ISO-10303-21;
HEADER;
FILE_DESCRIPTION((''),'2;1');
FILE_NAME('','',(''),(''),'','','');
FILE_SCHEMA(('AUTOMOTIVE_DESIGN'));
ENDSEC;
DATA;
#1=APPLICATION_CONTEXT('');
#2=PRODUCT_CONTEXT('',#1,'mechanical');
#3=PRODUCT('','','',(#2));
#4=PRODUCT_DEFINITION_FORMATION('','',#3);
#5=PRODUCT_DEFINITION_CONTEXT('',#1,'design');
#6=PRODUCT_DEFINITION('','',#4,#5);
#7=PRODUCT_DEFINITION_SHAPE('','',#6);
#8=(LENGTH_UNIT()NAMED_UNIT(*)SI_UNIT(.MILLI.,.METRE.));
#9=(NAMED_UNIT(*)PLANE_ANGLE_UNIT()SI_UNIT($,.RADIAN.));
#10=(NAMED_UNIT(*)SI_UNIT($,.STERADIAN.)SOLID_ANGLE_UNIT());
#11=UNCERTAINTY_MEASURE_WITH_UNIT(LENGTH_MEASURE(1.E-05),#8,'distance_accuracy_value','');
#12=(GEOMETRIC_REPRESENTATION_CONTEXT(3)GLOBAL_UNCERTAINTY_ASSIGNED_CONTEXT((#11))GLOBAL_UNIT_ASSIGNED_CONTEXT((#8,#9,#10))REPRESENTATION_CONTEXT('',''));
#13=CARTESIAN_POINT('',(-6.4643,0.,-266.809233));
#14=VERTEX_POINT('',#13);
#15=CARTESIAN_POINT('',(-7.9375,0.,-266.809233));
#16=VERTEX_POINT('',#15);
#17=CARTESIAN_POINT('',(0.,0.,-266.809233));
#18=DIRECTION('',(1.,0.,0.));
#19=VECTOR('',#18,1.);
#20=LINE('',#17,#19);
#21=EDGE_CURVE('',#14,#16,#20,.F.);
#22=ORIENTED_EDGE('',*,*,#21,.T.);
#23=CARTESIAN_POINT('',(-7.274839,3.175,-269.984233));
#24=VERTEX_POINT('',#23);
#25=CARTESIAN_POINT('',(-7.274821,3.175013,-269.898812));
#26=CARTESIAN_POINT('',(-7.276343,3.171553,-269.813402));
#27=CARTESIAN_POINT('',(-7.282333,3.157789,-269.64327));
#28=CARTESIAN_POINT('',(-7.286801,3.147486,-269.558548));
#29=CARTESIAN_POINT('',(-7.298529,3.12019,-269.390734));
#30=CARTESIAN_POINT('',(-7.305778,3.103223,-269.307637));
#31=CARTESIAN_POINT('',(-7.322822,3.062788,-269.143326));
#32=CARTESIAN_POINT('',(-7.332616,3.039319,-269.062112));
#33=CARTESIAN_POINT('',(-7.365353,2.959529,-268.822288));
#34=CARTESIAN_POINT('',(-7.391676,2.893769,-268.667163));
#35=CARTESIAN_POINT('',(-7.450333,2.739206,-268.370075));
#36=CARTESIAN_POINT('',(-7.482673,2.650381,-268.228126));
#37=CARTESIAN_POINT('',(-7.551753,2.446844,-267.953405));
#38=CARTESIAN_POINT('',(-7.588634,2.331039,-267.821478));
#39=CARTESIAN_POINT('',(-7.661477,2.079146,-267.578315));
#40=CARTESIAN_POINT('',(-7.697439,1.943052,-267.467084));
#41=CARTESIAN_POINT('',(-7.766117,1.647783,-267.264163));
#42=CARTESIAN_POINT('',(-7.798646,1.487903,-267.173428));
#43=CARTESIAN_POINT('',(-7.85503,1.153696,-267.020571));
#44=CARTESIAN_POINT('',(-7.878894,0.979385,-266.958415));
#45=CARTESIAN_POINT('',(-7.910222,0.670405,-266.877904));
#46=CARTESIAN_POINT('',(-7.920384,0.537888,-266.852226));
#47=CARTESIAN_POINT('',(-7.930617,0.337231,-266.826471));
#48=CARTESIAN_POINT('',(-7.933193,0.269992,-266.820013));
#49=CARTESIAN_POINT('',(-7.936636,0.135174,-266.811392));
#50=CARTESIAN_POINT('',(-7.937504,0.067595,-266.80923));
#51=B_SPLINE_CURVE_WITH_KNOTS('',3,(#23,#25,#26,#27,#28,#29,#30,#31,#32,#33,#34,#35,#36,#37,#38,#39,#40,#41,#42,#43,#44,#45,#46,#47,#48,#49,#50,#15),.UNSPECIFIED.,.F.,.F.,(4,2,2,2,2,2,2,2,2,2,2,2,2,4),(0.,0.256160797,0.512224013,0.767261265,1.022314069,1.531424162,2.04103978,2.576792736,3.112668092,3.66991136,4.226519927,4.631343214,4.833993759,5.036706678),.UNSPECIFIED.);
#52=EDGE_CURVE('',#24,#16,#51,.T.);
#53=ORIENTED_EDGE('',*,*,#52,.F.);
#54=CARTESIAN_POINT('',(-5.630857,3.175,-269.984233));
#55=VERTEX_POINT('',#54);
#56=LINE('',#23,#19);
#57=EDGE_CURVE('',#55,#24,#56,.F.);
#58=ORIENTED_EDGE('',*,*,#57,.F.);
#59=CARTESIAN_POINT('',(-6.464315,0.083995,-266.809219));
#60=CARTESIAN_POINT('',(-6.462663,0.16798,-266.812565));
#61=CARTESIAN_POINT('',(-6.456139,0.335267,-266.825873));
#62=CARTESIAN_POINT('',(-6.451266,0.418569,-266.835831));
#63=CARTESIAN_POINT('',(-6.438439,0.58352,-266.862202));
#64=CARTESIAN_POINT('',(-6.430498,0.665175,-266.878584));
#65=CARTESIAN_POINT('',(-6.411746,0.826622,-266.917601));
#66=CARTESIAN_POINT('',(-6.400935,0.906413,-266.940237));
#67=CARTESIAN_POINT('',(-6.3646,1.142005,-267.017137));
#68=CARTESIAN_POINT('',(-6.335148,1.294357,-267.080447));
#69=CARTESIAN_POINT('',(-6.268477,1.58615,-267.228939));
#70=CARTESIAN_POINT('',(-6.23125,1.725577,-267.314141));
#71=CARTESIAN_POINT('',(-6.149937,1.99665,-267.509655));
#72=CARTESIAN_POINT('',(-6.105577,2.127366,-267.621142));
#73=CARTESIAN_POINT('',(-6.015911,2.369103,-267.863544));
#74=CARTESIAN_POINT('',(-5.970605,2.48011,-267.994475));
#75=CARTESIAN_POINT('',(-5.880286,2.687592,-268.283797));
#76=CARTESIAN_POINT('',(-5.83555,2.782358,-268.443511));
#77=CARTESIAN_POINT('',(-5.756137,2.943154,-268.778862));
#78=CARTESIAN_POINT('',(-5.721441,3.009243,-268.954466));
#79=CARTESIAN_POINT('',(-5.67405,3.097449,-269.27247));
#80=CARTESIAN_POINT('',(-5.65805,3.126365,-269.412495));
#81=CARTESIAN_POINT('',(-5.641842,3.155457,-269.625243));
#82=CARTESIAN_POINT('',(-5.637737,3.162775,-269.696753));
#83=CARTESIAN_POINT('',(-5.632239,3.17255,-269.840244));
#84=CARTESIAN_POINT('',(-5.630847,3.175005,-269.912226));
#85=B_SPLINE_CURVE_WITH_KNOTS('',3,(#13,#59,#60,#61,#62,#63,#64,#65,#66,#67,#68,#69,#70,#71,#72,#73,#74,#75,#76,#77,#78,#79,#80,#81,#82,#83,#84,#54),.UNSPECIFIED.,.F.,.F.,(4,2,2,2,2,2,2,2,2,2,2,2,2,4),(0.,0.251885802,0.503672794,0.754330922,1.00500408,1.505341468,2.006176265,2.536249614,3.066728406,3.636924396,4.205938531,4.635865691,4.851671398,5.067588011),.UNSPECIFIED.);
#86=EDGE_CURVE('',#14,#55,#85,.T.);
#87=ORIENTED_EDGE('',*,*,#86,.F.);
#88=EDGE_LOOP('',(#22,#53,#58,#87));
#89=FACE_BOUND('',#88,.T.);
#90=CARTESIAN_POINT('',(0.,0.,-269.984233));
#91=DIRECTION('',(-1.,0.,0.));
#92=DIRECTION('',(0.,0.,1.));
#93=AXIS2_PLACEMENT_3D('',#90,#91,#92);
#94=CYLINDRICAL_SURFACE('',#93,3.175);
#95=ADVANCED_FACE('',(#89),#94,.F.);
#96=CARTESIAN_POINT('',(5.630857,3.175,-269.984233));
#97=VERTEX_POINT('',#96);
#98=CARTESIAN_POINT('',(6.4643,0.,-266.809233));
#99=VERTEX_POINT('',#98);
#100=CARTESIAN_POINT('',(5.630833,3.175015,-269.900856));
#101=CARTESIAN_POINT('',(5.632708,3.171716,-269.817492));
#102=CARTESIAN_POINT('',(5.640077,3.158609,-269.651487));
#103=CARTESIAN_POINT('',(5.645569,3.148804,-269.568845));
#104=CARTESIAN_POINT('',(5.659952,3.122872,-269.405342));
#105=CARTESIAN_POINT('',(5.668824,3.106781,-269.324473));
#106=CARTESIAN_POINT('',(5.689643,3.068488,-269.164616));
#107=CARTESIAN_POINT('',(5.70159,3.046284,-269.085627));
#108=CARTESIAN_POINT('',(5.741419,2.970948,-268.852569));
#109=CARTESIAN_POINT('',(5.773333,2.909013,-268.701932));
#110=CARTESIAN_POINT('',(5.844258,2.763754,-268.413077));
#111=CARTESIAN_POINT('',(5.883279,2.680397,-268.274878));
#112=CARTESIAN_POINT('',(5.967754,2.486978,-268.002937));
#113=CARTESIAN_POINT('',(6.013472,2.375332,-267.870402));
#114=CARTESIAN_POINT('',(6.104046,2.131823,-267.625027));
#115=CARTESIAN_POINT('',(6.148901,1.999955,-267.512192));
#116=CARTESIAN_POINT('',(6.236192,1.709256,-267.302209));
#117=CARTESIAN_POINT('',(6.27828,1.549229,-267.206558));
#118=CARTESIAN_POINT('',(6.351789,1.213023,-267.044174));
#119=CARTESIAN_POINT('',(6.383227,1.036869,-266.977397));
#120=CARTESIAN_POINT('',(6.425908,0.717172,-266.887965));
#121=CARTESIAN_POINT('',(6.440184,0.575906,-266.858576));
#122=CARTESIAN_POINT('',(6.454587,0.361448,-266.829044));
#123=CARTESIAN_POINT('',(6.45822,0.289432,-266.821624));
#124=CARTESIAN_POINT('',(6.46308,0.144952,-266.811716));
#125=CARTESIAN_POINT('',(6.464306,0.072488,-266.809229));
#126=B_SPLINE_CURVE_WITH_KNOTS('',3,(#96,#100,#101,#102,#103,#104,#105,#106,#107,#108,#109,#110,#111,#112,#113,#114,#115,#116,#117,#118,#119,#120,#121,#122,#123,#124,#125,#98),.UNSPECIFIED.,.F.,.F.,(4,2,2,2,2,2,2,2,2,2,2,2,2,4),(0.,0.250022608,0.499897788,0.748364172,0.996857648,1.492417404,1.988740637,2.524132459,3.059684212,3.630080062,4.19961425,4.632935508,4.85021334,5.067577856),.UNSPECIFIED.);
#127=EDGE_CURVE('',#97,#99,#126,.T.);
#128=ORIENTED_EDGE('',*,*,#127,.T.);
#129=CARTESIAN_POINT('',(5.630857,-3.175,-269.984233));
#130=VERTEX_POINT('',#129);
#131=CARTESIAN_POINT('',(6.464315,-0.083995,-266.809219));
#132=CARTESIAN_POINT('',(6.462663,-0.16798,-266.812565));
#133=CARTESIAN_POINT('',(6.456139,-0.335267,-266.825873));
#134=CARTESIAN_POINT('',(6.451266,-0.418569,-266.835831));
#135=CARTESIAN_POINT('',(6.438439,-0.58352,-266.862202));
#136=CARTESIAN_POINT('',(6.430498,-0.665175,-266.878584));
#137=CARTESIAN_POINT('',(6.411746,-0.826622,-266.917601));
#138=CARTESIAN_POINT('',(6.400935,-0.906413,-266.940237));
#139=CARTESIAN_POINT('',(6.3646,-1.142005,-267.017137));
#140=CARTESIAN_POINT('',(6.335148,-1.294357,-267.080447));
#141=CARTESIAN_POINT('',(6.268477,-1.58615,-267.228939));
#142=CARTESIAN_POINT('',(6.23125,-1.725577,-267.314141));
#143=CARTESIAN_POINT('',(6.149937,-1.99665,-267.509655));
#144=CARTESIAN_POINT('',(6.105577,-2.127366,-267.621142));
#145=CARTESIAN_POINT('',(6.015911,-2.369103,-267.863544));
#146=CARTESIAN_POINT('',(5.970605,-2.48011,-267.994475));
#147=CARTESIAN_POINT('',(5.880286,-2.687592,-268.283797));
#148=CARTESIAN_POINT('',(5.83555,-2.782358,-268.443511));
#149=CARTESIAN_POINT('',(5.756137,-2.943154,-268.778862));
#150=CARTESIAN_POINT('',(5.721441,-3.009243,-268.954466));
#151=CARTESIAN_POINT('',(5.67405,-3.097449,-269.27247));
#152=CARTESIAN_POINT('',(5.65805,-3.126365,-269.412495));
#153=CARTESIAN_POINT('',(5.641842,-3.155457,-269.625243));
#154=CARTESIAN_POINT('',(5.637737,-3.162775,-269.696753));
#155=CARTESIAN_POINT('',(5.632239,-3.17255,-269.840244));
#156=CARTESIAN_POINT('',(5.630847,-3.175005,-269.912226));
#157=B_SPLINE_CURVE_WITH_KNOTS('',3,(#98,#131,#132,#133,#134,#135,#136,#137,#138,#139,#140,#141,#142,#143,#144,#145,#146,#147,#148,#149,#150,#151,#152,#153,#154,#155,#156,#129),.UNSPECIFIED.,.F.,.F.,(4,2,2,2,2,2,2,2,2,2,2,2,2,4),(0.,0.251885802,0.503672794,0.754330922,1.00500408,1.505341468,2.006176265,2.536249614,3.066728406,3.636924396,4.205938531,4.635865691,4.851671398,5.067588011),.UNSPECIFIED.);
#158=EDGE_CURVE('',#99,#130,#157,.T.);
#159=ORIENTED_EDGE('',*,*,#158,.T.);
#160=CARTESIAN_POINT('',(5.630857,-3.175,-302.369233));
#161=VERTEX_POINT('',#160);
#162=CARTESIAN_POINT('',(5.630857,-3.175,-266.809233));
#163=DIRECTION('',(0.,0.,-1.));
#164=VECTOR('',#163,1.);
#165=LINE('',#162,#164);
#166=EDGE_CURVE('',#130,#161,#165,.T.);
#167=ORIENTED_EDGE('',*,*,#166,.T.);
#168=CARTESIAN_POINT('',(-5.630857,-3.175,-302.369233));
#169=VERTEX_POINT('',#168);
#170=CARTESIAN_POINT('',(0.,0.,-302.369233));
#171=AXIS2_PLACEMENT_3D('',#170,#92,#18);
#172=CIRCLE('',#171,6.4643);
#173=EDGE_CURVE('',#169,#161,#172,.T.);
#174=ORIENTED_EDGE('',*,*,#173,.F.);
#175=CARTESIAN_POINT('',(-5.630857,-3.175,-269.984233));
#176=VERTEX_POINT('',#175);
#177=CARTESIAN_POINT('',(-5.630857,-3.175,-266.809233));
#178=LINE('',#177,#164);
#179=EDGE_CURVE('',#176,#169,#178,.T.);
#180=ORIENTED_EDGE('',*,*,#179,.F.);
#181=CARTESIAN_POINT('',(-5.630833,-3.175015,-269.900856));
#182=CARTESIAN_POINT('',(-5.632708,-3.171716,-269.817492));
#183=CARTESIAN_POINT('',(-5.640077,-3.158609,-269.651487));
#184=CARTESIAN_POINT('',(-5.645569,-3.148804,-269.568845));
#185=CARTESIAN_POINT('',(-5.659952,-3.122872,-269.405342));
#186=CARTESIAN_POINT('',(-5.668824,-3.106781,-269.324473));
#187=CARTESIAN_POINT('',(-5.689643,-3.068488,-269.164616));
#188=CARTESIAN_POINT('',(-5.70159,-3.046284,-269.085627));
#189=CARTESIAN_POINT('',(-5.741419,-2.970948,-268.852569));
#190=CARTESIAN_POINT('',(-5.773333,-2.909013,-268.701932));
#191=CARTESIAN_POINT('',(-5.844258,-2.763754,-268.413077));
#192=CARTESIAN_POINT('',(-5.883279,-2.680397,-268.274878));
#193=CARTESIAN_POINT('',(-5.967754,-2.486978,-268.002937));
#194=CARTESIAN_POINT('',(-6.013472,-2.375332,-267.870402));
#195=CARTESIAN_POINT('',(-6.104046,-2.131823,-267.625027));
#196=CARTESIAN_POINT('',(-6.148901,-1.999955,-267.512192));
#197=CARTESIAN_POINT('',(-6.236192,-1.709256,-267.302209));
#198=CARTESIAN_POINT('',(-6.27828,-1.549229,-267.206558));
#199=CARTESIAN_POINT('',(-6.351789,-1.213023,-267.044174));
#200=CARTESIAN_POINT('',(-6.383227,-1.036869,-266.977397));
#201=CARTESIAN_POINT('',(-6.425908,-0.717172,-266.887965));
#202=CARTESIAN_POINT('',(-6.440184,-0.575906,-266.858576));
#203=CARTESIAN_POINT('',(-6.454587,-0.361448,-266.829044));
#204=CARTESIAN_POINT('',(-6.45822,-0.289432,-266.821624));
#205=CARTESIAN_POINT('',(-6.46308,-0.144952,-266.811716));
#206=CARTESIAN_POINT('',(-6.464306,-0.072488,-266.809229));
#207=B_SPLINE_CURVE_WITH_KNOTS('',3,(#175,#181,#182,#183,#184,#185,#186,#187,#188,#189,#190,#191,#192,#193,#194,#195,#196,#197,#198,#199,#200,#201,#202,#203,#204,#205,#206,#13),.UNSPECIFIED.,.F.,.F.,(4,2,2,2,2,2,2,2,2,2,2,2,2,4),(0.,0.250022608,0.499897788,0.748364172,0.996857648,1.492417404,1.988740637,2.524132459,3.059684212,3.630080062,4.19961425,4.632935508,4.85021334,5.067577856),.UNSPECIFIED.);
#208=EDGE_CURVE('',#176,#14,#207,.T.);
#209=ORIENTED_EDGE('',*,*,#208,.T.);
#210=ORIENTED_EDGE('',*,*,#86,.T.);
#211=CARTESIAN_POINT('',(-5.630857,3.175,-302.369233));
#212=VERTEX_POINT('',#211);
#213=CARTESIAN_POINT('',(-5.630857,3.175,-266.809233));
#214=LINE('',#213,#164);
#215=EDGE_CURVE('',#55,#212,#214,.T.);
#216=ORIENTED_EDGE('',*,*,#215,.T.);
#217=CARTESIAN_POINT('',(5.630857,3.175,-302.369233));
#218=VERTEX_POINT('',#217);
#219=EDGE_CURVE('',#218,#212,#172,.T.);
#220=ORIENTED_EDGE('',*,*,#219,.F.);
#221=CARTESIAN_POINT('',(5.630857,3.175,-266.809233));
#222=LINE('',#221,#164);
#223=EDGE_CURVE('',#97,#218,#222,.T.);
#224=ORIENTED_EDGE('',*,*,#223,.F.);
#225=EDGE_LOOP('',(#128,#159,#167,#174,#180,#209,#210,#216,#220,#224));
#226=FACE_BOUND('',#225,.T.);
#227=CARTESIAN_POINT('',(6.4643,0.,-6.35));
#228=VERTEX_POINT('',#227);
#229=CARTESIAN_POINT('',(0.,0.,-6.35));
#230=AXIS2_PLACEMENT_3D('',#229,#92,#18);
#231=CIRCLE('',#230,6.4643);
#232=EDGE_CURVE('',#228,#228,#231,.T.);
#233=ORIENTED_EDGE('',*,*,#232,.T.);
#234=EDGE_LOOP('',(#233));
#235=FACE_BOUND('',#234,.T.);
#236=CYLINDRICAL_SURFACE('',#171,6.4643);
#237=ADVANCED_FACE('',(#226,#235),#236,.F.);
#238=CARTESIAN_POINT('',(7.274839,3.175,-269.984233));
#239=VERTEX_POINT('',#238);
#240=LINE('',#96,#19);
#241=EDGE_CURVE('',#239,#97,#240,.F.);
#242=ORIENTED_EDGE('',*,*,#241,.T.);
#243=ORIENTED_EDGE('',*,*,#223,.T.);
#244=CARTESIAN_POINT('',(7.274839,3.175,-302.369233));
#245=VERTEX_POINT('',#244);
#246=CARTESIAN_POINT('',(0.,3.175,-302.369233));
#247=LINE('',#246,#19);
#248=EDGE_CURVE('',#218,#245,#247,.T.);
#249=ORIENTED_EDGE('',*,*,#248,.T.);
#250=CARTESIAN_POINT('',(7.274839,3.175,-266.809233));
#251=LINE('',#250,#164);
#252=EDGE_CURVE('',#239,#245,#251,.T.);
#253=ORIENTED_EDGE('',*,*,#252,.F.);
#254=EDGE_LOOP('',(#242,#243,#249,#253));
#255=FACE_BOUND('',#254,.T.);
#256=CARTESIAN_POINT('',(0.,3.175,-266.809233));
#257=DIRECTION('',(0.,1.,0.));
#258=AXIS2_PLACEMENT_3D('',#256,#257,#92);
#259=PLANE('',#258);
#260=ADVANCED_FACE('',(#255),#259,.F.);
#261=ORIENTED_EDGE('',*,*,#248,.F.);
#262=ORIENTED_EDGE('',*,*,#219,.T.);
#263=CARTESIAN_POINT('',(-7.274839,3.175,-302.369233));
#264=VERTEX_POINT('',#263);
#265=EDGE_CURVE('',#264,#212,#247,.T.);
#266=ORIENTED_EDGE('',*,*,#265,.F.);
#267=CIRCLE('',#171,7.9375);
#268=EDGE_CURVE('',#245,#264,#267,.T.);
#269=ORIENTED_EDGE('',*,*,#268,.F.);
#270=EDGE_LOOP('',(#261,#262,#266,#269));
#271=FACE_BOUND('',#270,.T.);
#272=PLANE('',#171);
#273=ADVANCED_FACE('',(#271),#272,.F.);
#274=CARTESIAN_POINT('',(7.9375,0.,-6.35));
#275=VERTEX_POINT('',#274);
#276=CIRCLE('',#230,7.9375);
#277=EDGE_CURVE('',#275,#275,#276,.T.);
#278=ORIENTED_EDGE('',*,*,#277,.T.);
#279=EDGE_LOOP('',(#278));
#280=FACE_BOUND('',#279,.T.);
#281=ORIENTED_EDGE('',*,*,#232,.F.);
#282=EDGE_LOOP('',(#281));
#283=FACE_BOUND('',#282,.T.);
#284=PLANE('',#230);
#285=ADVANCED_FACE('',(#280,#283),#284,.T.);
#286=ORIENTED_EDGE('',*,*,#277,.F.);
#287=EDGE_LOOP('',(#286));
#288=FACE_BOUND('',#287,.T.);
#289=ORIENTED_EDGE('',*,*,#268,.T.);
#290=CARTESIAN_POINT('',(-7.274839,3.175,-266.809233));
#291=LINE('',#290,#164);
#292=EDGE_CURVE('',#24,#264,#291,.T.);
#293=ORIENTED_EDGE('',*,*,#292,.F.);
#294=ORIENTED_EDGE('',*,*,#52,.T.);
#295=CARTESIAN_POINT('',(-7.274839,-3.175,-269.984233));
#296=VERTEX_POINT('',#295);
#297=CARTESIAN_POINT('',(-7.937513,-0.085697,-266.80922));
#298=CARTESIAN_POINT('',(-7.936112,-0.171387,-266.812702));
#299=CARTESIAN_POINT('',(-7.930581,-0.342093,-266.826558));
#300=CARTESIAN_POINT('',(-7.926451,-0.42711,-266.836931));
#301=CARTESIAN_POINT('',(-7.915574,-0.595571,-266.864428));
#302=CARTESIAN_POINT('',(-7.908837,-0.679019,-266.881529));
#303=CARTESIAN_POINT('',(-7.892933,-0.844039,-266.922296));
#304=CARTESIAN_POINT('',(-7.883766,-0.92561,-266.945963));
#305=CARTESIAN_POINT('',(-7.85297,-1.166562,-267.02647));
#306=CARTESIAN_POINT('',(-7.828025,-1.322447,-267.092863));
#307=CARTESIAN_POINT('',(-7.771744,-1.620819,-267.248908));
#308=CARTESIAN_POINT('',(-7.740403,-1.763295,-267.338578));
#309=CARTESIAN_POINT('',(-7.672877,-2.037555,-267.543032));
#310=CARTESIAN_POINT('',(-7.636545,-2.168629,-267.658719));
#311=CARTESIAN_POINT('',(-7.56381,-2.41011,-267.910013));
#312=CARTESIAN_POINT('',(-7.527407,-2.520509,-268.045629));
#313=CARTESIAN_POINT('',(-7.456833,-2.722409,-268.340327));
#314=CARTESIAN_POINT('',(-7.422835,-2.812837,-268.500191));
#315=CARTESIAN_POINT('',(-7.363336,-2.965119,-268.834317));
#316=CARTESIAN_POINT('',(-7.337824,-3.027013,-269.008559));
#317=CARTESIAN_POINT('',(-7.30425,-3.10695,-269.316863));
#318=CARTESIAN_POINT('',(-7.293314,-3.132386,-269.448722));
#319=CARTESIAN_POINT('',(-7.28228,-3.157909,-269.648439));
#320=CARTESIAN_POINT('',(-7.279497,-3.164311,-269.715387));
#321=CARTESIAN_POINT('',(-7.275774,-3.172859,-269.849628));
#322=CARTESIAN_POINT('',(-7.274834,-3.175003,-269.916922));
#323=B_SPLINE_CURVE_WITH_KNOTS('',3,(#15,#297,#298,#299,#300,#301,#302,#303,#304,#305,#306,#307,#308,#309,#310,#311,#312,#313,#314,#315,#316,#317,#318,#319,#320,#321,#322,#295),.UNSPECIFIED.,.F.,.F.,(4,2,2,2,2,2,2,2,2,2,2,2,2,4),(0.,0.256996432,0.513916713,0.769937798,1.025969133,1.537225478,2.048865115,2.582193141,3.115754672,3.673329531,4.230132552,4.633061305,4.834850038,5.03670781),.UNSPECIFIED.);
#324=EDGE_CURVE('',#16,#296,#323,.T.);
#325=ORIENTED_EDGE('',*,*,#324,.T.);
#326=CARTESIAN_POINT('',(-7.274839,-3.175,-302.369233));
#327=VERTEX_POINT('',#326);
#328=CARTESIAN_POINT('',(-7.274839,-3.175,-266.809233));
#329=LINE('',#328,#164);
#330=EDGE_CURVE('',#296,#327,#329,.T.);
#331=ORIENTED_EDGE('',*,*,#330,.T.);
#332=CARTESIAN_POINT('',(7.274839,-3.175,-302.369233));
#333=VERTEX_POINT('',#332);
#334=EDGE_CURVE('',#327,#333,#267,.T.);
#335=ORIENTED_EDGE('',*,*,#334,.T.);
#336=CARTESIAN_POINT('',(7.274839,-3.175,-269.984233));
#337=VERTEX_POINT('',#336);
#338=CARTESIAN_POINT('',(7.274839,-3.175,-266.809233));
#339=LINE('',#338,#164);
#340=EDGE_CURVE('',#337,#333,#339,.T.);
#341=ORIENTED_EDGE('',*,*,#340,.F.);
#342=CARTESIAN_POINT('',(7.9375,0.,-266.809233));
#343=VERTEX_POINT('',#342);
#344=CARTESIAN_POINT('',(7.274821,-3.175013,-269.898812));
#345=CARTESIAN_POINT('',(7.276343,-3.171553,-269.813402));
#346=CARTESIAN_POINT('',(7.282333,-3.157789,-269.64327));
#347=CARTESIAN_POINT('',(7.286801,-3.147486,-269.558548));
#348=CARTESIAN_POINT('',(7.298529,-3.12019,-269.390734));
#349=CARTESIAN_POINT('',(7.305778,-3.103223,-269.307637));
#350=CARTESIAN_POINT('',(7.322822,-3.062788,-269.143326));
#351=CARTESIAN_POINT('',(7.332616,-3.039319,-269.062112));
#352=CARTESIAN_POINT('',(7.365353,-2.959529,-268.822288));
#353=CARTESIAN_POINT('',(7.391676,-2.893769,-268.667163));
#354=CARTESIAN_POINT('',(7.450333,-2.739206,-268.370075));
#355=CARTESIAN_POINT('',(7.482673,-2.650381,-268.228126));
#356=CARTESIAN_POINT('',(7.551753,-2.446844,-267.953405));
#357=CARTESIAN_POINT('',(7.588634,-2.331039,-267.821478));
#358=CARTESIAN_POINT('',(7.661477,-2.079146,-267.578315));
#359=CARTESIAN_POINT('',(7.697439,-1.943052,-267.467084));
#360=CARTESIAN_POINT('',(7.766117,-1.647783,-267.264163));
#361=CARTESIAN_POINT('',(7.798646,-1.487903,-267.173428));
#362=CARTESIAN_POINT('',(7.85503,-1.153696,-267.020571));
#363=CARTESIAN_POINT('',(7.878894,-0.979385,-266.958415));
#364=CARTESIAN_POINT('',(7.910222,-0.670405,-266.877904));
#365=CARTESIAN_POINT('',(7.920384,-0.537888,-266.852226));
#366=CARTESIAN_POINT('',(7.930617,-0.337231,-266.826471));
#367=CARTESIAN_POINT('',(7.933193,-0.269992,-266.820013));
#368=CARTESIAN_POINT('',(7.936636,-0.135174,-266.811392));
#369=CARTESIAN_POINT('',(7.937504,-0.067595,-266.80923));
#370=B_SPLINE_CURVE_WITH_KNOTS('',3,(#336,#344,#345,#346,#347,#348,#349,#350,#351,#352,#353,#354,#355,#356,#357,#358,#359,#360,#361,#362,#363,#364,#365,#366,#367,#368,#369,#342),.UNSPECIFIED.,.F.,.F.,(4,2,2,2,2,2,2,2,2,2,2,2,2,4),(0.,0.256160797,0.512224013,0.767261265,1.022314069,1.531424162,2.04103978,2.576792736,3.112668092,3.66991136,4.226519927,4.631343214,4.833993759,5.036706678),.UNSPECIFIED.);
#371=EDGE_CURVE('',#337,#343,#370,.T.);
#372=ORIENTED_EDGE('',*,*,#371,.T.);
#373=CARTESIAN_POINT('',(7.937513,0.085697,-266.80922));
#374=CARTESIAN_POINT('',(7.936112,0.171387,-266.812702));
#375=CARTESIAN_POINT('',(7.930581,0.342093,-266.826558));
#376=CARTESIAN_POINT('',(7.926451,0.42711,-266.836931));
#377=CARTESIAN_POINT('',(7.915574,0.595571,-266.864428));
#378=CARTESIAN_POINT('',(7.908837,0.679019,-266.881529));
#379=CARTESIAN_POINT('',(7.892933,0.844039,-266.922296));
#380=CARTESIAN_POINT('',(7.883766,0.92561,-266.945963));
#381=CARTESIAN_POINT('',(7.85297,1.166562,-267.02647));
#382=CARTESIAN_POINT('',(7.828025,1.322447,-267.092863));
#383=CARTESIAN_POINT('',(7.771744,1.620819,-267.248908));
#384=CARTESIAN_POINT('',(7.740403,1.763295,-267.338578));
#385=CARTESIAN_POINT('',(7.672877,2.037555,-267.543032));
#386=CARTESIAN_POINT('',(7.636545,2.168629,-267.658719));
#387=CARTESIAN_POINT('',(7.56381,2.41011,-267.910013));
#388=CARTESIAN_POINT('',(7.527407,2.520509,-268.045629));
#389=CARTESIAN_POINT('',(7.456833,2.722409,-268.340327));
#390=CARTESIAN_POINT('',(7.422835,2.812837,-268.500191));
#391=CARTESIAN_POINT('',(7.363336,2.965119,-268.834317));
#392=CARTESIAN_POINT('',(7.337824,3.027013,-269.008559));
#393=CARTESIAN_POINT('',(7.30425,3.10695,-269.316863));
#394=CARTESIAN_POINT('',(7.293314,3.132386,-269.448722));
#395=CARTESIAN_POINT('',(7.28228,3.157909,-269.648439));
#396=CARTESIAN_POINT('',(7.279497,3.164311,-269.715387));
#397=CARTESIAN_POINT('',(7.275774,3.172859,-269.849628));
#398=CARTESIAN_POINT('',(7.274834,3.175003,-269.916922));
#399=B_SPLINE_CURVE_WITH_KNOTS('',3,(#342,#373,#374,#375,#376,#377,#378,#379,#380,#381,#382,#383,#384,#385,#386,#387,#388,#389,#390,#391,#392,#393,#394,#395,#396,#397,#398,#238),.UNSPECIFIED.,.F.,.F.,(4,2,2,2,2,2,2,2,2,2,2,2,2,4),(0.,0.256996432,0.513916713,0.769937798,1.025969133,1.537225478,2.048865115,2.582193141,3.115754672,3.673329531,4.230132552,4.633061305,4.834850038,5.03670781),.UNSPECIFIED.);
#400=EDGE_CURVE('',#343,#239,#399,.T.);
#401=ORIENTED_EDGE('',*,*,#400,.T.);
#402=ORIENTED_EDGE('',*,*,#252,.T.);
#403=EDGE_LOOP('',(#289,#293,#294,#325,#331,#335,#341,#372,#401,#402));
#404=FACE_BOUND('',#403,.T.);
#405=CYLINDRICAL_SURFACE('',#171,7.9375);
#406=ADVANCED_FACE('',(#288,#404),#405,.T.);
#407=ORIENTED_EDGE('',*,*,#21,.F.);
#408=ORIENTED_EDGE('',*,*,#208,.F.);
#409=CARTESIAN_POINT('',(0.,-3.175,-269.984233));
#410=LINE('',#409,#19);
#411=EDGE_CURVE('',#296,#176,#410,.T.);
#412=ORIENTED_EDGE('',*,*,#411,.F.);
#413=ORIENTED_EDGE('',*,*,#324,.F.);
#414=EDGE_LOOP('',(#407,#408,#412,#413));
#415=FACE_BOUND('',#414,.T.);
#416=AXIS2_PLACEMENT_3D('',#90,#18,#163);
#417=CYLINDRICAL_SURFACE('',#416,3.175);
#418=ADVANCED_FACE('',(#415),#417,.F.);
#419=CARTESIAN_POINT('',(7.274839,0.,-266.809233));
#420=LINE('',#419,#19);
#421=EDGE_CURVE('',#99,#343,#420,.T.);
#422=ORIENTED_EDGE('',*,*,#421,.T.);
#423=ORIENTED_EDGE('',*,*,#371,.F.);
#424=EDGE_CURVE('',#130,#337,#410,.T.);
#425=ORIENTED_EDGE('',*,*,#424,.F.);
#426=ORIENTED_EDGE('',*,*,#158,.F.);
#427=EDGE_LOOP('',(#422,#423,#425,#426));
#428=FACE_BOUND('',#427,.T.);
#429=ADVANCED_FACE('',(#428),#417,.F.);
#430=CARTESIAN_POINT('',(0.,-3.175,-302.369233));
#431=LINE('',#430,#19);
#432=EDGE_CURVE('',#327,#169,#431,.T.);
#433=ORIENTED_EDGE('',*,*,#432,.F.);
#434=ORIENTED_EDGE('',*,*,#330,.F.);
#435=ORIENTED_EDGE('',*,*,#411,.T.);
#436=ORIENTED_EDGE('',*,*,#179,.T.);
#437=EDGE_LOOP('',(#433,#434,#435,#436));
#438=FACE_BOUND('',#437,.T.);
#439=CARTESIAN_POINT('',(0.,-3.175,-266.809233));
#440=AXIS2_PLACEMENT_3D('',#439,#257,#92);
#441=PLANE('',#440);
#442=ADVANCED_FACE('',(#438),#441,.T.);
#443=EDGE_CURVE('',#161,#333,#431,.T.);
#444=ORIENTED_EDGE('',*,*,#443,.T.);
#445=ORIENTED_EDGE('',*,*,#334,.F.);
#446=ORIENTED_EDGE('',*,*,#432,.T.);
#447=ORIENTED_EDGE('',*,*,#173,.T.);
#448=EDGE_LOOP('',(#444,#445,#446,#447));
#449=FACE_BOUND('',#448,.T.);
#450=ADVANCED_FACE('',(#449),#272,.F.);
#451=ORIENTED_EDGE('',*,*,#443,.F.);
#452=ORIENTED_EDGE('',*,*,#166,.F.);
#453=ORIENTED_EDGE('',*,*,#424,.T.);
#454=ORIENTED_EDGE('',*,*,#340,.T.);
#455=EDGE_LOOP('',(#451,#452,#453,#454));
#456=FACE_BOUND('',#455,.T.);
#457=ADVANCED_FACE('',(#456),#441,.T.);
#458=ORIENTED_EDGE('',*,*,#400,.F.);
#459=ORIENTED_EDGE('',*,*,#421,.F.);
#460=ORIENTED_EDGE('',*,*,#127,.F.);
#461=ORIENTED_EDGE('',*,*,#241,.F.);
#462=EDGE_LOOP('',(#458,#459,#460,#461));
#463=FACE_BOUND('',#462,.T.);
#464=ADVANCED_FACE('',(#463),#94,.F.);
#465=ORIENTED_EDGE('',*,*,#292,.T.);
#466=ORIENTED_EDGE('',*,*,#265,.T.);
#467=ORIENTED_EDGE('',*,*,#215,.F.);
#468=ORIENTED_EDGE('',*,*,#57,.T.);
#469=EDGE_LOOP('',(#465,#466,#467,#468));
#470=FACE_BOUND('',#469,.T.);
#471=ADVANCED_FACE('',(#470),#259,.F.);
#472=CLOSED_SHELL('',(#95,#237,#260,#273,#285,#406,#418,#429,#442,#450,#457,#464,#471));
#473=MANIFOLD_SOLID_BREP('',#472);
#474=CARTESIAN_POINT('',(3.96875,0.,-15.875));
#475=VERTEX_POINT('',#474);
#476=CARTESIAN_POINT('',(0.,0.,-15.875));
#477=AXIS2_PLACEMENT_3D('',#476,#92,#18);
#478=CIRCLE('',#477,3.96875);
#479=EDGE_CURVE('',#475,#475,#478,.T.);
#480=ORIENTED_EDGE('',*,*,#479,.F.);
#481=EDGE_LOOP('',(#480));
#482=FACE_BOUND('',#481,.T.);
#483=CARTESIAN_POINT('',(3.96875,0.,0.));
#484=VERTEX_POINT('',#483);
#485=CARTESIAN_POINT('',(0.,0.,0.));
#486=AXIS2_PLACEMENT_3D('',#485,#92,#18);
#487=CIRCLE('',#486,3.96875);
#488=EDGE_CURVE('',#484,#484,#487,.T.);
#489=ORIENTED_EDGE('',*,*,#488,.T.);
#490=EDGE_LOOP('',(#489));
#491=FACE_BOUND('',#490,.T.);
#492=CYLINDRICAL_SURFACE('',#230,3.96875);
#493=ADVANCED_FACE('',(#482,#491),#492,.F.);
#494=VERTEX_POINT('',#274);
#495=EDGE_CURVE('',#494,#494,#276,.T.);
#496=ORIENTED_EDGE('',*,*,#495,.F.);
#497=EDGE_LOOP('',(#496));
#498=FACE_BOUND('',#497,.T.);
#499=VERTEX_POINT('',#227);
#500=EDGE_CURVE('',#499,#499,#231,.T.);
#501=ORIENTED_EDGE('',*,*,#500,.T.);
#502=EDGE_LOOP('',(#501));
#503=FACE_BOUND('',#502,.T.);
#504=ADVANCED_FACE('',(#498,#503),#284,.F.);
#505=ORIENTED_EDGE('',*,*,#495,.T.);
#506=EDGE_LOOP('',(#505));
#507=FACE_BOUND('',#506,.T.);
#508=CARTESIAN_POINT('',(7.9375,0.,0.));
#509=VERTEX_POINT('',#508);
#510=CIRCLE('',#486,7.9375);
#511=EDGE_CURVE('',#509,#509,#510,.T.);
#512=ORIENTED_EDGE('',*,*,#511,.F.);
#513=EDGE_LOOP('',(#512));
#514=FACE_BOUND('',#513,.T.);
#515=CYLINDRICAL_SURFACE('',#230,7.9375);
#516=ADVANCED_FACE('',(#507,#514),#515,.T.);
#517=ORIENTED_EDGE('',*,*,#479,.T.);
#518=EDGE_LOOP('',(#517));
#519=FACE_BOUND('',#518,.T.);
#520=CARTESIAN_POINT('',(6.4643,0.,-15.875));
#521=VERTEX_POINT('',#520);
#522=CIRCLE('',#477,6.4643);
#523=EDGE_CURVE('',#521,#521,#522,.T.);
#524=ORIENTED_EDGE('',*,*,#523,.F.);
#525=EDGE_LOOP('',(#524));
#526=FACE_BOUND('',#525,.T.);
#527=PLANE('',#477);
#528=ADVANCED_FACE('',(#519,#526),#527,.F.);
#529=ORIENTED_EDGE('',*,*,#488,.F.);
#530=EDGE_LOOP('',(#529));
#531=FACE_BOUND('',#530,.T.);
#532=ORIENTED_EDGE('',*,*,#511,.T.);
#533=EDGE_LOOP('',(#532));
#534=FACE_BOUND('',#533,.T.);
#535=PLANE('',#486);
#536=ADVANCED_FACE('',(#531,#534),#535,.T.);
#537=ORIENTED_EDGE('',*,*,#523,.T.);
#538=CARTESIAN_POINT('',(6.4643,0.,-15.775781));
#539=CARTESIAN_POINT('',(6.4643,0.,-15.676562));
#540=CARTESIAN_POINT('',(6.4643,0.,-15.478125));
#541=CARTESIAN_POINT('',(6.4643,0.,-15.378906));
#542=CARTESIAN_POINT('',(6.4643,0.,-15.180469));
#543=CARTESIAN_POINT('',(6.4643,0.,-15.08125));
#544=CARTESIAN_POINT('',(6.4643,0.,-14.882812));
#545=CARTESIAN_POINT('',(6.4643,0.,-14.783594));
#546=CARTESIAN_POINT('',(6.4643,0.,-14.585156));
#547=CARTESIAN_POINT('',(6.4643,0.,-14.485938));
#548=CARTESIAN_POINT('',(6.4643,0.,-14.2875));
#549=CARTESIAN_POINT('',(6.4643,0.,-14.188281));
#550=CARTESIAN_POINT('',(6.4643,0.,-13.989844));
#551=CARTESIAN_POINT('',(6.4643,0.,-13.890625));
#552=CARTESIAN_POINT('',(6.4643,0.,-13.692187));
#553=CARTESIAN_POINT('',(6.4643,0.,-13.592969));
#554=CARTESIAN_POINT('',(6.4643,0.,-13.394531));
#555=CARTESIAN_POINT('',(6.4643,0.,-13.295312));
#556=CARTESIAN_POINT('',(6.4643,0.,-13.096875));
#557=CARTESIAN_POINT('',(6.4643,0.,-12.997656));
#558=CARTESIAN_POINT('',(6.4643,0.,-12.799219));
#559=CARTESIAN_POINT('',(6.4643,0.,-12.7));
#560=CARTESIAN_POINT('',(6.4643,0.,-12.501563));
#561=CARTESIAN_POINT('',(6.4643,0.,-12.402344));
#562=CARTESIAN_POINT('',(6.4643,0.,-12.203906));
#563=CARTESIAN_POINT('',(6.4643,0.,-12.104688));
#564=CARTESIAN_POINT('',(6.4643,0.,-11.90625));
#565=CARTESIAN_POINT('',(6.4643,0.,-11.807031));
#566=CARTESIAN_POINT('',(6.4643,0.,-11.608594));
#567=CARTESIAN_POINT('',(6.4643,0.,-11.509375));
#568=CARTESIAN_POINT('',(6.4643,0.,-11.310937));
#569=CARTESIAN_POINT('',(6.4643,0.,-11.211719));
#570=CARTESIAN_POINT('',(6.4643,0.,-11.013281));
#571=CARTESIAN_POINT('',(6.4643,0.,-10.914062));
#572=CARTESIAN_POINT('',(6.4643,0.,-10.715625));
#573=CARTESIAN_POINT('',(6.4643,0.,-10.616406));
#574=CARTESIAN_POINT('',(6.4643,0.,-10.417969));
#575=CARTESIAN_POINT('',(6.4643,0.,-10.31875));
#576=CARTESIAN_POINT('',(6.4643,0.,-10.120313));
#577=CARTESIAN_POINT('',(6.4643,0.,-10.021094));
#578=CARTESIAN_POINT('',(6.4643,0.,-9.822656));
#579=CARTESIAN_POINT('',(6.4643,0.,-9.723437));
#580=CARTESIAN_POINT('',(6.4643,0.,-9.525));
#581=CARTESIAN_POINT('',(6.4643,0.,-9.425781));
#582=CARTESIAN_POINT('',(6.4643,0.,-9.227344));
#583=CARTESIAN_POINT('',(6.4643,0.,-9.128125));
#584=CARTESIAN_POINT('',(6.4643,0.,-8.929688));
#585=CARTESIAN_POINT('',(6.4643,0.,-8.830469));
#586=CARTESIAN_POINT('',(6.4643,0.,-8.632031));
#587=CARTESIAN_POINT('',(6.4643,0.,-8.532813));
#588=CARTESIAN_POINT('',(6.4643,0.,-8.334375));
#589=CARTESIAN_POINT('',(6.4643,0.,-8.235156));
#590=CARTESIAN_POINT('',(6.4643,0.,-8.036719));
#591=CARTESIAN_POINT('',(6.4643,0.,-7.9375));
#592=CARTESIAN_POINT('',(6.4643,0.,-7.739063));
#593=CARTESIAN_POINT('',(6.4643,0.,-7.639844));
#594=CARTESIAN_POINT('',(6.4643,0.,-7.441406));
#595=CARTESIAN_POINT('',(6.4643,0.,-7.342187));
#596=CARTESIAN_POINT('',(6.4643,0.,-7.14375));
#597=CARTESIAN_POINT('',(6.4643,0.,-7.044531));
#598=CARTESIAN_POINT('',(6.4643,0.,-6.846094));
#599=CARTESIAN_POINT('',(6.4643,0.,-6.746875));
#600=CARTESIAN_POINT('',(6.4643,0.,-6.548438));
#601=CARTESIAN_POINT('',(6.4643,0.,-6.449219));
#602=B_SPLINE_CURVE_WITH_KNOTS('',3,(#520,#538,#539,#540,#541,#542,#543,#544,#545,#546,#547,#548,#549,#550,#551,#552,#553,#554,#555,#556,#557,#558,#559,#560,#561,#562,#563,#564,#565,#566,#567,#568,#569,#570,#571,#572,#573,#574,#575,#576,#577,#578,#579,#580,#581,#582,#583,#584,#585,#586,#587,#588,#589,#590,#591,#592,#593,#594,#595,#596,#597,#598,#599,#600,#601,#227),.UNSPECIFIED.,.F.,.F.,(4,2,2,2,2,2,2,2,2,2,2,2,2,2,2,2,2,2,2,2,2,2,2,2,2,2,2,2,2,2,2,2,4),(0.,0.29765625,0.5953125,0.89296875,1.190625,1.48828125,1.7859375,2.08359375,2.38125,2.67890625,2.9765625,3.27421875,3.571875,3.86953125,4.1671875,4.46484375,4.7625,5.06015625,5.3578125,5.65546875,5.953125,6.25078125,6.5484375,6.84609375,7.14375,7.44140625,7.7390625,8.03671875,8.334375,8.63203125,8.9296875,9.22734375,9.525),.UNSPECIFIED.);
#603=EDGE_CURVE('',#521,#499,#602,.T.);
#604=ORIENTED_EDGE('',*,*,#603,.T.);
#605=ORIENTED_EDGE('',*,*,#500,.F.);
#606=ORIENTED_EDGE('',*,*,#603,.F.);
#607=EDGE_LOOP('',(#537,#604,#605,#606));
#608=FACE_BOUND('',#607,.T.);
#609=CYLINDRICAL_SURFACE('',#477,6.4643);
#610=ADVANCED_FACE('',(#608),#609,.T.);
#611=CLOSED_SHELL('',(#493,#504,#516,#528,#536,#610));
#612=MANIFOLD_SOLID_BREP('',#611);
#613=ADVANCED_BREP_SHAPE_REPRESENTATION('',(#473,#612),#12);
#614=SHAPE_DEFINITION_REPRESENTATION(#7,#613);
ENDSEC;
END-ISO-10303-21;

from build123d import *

# Parameters (mm, degrees)
THREADED_INSERT_1_1_DEPTH = 6.35
THREADED_START            = -6.35
THREADED_INSERT_1_2_DEPTH = 9.525
A_ARM_START               = -6.35
A_ARM_TUBE_DEPTH          = 296.019233
APEX_START                = -266.809233
APEX_SLOT_DEPTH           = 35.56
FILLET1_R                 = 3.175


with BuildPart() as part:
    # Sketch1 → Threaded insert 1-1 (new body)
    with BuildSketch(Plane.XY):
        with BuildLine():
            ThreePointArc((-2.38125, 3.175), (0, 3.96875), (2.38125, 3.175))
            Line((2.38125, 3.175), (5.630856905, 3.175))
            ThreePointArc((5.630856905, 3.175), (0, 6.4643), (-5.630856905, 3.175))
            Line((-5.630856905, 3.175), (-2.38125, 3.175))
        make_face()
        with BuildLine():
            ThreePointArc((-5.630856905, 3.175), (0, 6.4643), (5.630856905, 3.175))
            Line((5.630856905, 3.175), (7.274838916, 3.175))
            ThreePointArc((7.274838916, 3.175), (0, 7.9375), (-7.274838916, 3.175))
            Line((-7.274838916, 3.175), (-5.630856905, 3.175))
        make_face()
        with BuildLine():
            ThreePointArc((2.38125, 3.175), (3.549757914, 1.774878957), (3.96875, 0))
            Line((3.96875, 0), (6.4643, 0))
            ThreePointArc((6.4643, 0), (6.252468424, 1.641283978), (5.630856905, 3.175))
            Line((5.630856905, 3.175), (2.38125, 3.175))
        make_face()
        with BuildLine():
            Line((-6.4643, 0), (-3.96875, 0))
            ThreePointArc((-3.96875, 0), (-3.549757914, 1.774878957), (-2.38125, 3.175))
            Line((-2.38125, 3.175), (-5.630856905, 3.175))
            ThreePointArc((-5.630856905, 3.175), (-6.252468424, 1.641283978), (-6.4643, 0))
        make_face()
        with BuildLine():
            ThreePointArc((5.630856905, 3.175), (6.252468424, 1.641283978), (6.4643, 0))
            Line((6.4643, 0), (7.9375, 0))
            ThreePointArc((7.9375, 0), (7.770068859, 1.621707797), (7.274838916, 3.175))
            Line((7.274838916, 3.175), (5.630856905, 3.175))
        make_face()
        with BuildLine():
            Line((-7.9375, 0), (-6.4643, 0))
            ThreePointArc((-6.4643, 0), (-6.252468424, 1.641283978), (-5.630856905, 3.175))
            Line((-5.630856905, 3.175), (-7.274838916, 3.175))
            ThreePointArc((-7.274838916, 3.175), (-7.770068859, 1.621707797), (-7.9375, 0))
        make_face()
        with BuildLine():
            Line((7.9375, 0), (6.4643, 0))
            ThreePointArc((6.4643, 0), (6.252468424, -1.641283978), (5.630856905, -3.175))
            Line((5.630856905, -3.175), (7.274838916, -3.175))
            ThreePointArc((7.274838916, -3.175), (7.770068859, -1.621707797), (7.9375, 0))
        make_face()
        with BuildLine():
            ThreePointArc((-5.630856905, -3.175), (-6.252468424, -1.641283978), (-6.4643, 0))
            Line((-6.4643, 0), (-7.9375, 0))
            ThreePointArc((-7.9375, 0), (-7.770068859, -1.621707797), (-7.274838916, -3.175))
            Line((-7.274838916, -3.175), (-5.630856905, -3.175))
        make_face()
        with BuildLine():
            Line((6.4643, 0), (3.96875, 0))
            ThreePointArc((3.96875, 0), (3.549757914, -1.774878957), (2.38125, -3.175))
            Line((2.38125, -3.175), (5.630856905, -3.175))
            ThreePointArc((5.630856905, -3.175), (6.252468424, -1.641283978), (6.4643, 0))
        make_face()
        with BuildLine():
            ThreePointArc((-2.38125, -3.175), (-3.549757914, -1.774878957), (-3.96875, 0))
            Line((-3.96875, 0), (-6.4643, 0))
            ThreePointArc((-6.4643, 0), (-6.252468424, -1.641283978), (-5.630856905, -3.175))
            Line((-5.630856905, -3.175), (-2.38125, -3.175))
        make_face()
        with BuildLine():
            Line((5.630856905, -3.175), (2.38125, -3.175))
            ThreePointArc((2.38125, -3.175), (0, -3.96875), (-2.38125, -3.175))
            Line((-2.38125, -3.175), (-5.630856905, -3.175))
            ThreePointArc((-5.630856905, -3.175), (0, -6.4643), (5.630856905, -3.175))
        make_face()
        with BuildLine():
            Line((7.274838916, -3.175), (5.630856905, -3.175))
            ThreePointArc((5.630856905, -3.175), (0, -6.4643), (-5.630856905, -3.175))
            Line((-5.630856905, -3.175), (-7.274838916, -3.175))
            ThreePointArc((-7.274838916, -3.175), (0, -7.9375), (7.274838916, -3.175))
        make_face()
    extrude(amount=-THREADED_INSERT_1_1_DEPTH)

    # Sketch1<3> → Threaded insert 1-2 (add)
    with BuildSketch(Plane.XY.offset(THREADED_START)):
        with BuildLine():
            ThreePointArc((-2.38125, 3.175), (0, 3.96875), (2.38125, 3.175))
            Line((2.38125, 3.175), (5.630856905, 3.175))
            ThreePointArc((5.630856905, 3.175), (0, 6.4643), (-5.630856905, 3.175))
            Line((-5.630856905, 3.175), (-2.38125, 3.175))
        make_face()
        with BuildLine():
            ThreePointArc((2.38125, 3.175), (3.549757914, 1.774878957), (3.96875, 0))
            Line((3.96875, 0), (6.4643, 0))
            ThreePointArc((6.4643, 0), (6.252468424, 1.641283978), (5.630856905, 3.175))
            Line((5.630856905, 3.175), (2.38125, 3.175))
        make_face()
        with BuildLine():
            Line((-6.4643, 0), (-3.96875, 0))
            ThreePointArc((-3.96875, 0), (-3.549757914, 1.774878957), (-2.38125, 3.175))
            Line((-2.38125, 3.175), (-5.630856905, 3.175))
            ThreePointArc((-5.630856905, 3.175), (-6.252468424, 1.641283978), (-6.4643, 0))
        make_face()
        with BuildLine():
            Line((6.4643, 0), (3.96875, 0))
            ThreePointArc((3.96875, 0), (3.549757914, -1.774878957), (2.38125, -3.175))
            Line((2.38125, -3.175), (5.630856905, -3.175))
            ThreePointArc((5.630856905, -3.175), (6.252468424, -1.641283978), (6.4643, 0))
        make_face()
        with BuildLine():
            ThreePointArc((-2.38125, -3.175), (-3.549757914, -1.774878957), (-3.96875, 0))
            Line((-3.96875, 0), (-6.4643, 0))
            ThreePointArc((-6.4643, 0), (-6.252468424, -1.641283978), (-5.630856905, -3.175))
            Line((-5.630856905, -3.175), (-2.38125, -3.175))
        make_face()
        with BuildLine():
            Line((5.630856905, -3.175), (2.38125, -3.175))
            ThreePointArc((2.38125, -3.175), (0, -3.96875), (-2.38125, -3.175))
            Line((-2.38125, -3.175), (-5.630856905, -3.175))
            ThreePointArc((-5.630856905, -3.175), (0, -6.4643), (5.630856905, -3.175))
        make_face()
    extrude(amount=-THREADED_INSERT_1_2_DEPTH)


with BuildPart() as body_2:
    # Sketch1<4> → A-arm tube (new body)
    with BuildSketch(Plane.XY.offset(A_ARM_START)):
        with BuildLine():
            ThreePointArc((-5.630856905, 3.175), (0, 6.4643), (5.630856905, 3.175))
            Line((5.630856905, 3.175), (7.274838916, 3.175))
            ThreePointArc((7.274838916, 3.175), (0, 7.9375), (-7.274838916, 3.175))
            Line((-7.274838916, 3.175), (-5.630856905, 3.175))
        make_face()
        with BuildLine():
            ThreePointArc((5.630856905, 3.175), (6.252468424, 1.641283978), (6.4643, 0))
            Line((6.4643, 0), (7.9375, 0))
            ThreePointArc((7.9375, 0), (7.770068859, 1.621707797), (7.274838916, 3.175))
            Line((7.274838916, 3.175), (5.630856905, 3.175))
        make_face()
        with BuildLine():
            Line((-7.9375, 0), (-6.4643, 0))
            ThreePointArc((-6.4643, 0), (-6.252468424, 1.641283978), (-5.630856905, 3.175))
            Line((-5.630856905, 3.175), (-7.274838916, 3.175))
            ThreePointArc((-7.274838916, 3.175), (-7.770068859, 1.621707797), (-7.9375, 0))
        make_face()
        with BuildLine():
            Line((7.9375, 0), (6.4643, 0))
            ThreePointArc((6.4643, 0), (6.252468424, -1.641283978), (5.630856905, -3.175))
            Line((5.630856905, -3.175), (7.274838916, -3.175))
            ThreePointArc((7.274838916, -3.175), (7.770068859, -1.621707797), (7.9375, 0))
        make_face()
        with BuildLine():
            ThreePointArc((-5.630856905, -3.175), (-6.252468424, -1.641283978), (-6.4643, 0))
            Line((-6.4643, 0), (-7.9375, 0))
            ThreePointArc((-7.9375, 0), (-7.770068859, -1.621707797), (-7.274838916, -3.175))
            Line((-7.274838916, -3.175), (-5.630856905, -3.175))
        make_face()
        with BuildLine():
            Line((7.274838916, -3.175), (5.630856905, -3.175))
            ThreePointArc((5.630856905, -3.175), (0, -6.4643), (-5.630856905, -3.175))
            Line((-5.630856905, -3.175), (-7.274838916, -3.175))
            ThreePointArc((-7.274838916, -3.175), (0, -7.9375), (7.274838916, -3.175))
        make_face()
    extrude(amount=-A_ARM_TUBE_DEPTH)

    # Sketch1<5> → Apex slot (cut)
    with BuildSketch(Plane.XY.offset(APEX_START)):
        with BuildLine():
            ThreePointArc((5.630856905, 3.175), (6.252468424, 1.641283978), (6.4643, 0))
            Line((6.4643, 0), (7.9375, 0))
            ThreePointArc((7.9375, 0), (7.770068859, 1.621707797), (7.274838916, 3.175))
            Line((7.274838916, 3.175), (5.630856905, 3.175))
        make_face()
        with BuildLine():
            Line((-7.9375, 0), (-6.4643, 0))
            ThreePointArc((-6.4643, 0), (-6.252468424, 1.641283978), (-5.630856905, 3.175))
            Line((-5.630856905, 3.175), (-7.274838916, 3.175))
            ThreePointArc((-7.274838916, 3.175), (-7.770068859, 1.621707797), (-7.9375, 0))
        make_face()
        with BuildLine():
            Line((7.9375, 0), (6.4643, 0))
            ThreePointArc((6.4643, 0), (6.252468424, -1.641283978), (5.630856905, -3.175))
            Line((5.630856905, -3.175), (7.274838916, -3.175))
            ThreePointArc((7.274838916, -3.175), (7.770068859, -1.621707797), (7.9375, 0))
        make_face()
        with BuildLine():
            ThreePointArc((-5.630856905, -3.175), (-6.252468424, -1.641283978), (-6.4643, 0))
            Line((-6.4643, 0), (-7.9375, 0))
            ThreePointArc((-7.9375, 0), (-7.770068859, -1.621707797), (-7.274838916, -3.175))
            Line((-7.274838916, -3.175), (-5.630856905, -3.175))
        make_face()
    extrude(amount=-APEX_SLOT_DEPTH, mode=Mode.SUBTRACT)

    # Fillet1
    # the kernel refuses this fillet: 3.175 mm, written as the material it adds along each edge
    with BuildSketch(Plane(origin=(2.306643095, 3.175, -266.809233), x_dir=(0, 0, -1), z_dir=(-1, 0, 0))) as fillet1_piece_1_section:
        with BuildLine():
            CenterArc((FILLET1_R, FILLET1_R), FILLET1_R, 180, 90)
            Line((0, FILLET1_R), (0, 0))
            Line((0, 0), (FILLET1_R, 0))
        make_face()
    fillet1_piece_1 = extrude(amount=17.51898201, mode=Mode.PRIVATE)
    fillet1_piece_1 = fillet1_piece_1 - Plane(origin=(0, 0, -267.52896562), x_dir=(-0.8710698614669244, 0.49115913555994567, 0), z_dir=(0, 0, 1)) * Cylinder(6.4643, 48, mode=Mode.PRIVATE)
    fillet1_piece_1 = fillet1_piece_1 & Plane(origin=(0, 0, -267.52896562), x_dir=(-1, 0, 0), z_dir=(0, 0, 1)) * Cylinder(7.9375, 48, mode=Mode.PRIVATE)
    add(fillet1_piece_1)
    with BuildSketch(Plane(origin=(-15.212338916, -3.175, -266.809233), x_dir=(0, 0, -1), z_dir=(1, 0, 0))) as fillet1_piece_2_section:
        with BuildLine():
            CenterArc((FILLET1_R, FILLET1_R), FILLET1_R, 180, 90)
            Line((0, FILLET1_R), (0, 0))
            Line((0, 0), (FILLET1_R, 0))
        make_face()
    fillet1_piece_2 = extrude(amount=17.51898201, mode=Mode.PRIVATE)
    fillet1_piece_2 = fillet1_piece_2 - Plane(origin=(0, 0, -267.528965783), x_dir=(-0.8710698614669244, 0.49115913555994567, 0), z_dir=(0, 0, 1)) * Cylinder(6.4643, 48, mode=Mode.PRIVATE)
    fillet1_piece_2 = fillet1_piece_2 & Plane(origin=(0, 0, -267.528965783), x_dir=(-1, 0, 0), z_dir=(0, 0, 1)) * Cylinder(7.9375, 48, mode=Mode.PRIVATE)
    add(fillet1_piece_2)
    with BuildSketch(Plane(origin=(-2.306643095, -3.175, -266.809233), x_dir=(0, 0, -1), z_dir=(1, 0, 0))) as fillet1_piece_3_section:
        with BuildLine():
            CenterArc((FILLET1_R, FILLET1_R), FILLET1_R, 180, 90)
            Line((0, FILLET1_R), (0, 0))
            Line((0, 0), (FILLET1_R, 0))
        make_face()
    fillet1_piece_3 = extrude(amount=17.51898201, mode=Mode.PRIVATE)
    fillet1_piece_3 = fillet1_piece_3 - Plane(origin=(0, 0, -267.52896562), x_dir=(-0.8710698614669244, 0.49115913555994567, 0), z_dir=(0, 0, 1)) * Cylinder(6.4643, 48, mode=Mode.PRIVATE)
    fillet1_piece_3 = fillet1_piece_3 & Plane(origin=(0, 0, -267.52896562), x_dir=(-1, 0, 0), z_dir=(0, 0, 1)) * Cylinder(7.9375, 48, mode=Mode.PRIVATE)
    add(fillet1_piece_3)
    with BuildSketch(Plane(origin=(15.212338916, 3.175, -266.809233), x_dir=(0, -1, 0), z_dir=(-1, 0, 0))) as fillet1_piece_4_section:
        with BuildLine():
            CenterArc((FILLET1_R, -FILLET1_R), FILLET1_R, 90, 90)
            Line((0, -FILLET1_R), (0, 0))
            Line((0, 0), (FILLET1_R, 0))
        make_face()
    fillet1_piece_4 = extrude(amount=17.51898201, mode=Mode.PRIVATE)
    fillet1_piece_4 = fillet1_piece_4 - Plane(origin=(0, 0, -267.528965609), x_dir=(-0.8710698614669244, 0.49115913555994567, 0), z_dir=(0, 0, 1)) * Cylinder(6.4643, 48, mode=Mode.PRIVATE)
    fillet1_piece_4 = fillet1_piece_4 & Plane(origin=(0, 0, -267.528965609), x_dir=(-1, 0, 0), z_dir=(0, 0, 1)) * Cylinder(7.9375, 48, mode=Mode.PRIVATE)
    add(fillet1_piece_4)


solid = Compound([part.part, body_2.part])
